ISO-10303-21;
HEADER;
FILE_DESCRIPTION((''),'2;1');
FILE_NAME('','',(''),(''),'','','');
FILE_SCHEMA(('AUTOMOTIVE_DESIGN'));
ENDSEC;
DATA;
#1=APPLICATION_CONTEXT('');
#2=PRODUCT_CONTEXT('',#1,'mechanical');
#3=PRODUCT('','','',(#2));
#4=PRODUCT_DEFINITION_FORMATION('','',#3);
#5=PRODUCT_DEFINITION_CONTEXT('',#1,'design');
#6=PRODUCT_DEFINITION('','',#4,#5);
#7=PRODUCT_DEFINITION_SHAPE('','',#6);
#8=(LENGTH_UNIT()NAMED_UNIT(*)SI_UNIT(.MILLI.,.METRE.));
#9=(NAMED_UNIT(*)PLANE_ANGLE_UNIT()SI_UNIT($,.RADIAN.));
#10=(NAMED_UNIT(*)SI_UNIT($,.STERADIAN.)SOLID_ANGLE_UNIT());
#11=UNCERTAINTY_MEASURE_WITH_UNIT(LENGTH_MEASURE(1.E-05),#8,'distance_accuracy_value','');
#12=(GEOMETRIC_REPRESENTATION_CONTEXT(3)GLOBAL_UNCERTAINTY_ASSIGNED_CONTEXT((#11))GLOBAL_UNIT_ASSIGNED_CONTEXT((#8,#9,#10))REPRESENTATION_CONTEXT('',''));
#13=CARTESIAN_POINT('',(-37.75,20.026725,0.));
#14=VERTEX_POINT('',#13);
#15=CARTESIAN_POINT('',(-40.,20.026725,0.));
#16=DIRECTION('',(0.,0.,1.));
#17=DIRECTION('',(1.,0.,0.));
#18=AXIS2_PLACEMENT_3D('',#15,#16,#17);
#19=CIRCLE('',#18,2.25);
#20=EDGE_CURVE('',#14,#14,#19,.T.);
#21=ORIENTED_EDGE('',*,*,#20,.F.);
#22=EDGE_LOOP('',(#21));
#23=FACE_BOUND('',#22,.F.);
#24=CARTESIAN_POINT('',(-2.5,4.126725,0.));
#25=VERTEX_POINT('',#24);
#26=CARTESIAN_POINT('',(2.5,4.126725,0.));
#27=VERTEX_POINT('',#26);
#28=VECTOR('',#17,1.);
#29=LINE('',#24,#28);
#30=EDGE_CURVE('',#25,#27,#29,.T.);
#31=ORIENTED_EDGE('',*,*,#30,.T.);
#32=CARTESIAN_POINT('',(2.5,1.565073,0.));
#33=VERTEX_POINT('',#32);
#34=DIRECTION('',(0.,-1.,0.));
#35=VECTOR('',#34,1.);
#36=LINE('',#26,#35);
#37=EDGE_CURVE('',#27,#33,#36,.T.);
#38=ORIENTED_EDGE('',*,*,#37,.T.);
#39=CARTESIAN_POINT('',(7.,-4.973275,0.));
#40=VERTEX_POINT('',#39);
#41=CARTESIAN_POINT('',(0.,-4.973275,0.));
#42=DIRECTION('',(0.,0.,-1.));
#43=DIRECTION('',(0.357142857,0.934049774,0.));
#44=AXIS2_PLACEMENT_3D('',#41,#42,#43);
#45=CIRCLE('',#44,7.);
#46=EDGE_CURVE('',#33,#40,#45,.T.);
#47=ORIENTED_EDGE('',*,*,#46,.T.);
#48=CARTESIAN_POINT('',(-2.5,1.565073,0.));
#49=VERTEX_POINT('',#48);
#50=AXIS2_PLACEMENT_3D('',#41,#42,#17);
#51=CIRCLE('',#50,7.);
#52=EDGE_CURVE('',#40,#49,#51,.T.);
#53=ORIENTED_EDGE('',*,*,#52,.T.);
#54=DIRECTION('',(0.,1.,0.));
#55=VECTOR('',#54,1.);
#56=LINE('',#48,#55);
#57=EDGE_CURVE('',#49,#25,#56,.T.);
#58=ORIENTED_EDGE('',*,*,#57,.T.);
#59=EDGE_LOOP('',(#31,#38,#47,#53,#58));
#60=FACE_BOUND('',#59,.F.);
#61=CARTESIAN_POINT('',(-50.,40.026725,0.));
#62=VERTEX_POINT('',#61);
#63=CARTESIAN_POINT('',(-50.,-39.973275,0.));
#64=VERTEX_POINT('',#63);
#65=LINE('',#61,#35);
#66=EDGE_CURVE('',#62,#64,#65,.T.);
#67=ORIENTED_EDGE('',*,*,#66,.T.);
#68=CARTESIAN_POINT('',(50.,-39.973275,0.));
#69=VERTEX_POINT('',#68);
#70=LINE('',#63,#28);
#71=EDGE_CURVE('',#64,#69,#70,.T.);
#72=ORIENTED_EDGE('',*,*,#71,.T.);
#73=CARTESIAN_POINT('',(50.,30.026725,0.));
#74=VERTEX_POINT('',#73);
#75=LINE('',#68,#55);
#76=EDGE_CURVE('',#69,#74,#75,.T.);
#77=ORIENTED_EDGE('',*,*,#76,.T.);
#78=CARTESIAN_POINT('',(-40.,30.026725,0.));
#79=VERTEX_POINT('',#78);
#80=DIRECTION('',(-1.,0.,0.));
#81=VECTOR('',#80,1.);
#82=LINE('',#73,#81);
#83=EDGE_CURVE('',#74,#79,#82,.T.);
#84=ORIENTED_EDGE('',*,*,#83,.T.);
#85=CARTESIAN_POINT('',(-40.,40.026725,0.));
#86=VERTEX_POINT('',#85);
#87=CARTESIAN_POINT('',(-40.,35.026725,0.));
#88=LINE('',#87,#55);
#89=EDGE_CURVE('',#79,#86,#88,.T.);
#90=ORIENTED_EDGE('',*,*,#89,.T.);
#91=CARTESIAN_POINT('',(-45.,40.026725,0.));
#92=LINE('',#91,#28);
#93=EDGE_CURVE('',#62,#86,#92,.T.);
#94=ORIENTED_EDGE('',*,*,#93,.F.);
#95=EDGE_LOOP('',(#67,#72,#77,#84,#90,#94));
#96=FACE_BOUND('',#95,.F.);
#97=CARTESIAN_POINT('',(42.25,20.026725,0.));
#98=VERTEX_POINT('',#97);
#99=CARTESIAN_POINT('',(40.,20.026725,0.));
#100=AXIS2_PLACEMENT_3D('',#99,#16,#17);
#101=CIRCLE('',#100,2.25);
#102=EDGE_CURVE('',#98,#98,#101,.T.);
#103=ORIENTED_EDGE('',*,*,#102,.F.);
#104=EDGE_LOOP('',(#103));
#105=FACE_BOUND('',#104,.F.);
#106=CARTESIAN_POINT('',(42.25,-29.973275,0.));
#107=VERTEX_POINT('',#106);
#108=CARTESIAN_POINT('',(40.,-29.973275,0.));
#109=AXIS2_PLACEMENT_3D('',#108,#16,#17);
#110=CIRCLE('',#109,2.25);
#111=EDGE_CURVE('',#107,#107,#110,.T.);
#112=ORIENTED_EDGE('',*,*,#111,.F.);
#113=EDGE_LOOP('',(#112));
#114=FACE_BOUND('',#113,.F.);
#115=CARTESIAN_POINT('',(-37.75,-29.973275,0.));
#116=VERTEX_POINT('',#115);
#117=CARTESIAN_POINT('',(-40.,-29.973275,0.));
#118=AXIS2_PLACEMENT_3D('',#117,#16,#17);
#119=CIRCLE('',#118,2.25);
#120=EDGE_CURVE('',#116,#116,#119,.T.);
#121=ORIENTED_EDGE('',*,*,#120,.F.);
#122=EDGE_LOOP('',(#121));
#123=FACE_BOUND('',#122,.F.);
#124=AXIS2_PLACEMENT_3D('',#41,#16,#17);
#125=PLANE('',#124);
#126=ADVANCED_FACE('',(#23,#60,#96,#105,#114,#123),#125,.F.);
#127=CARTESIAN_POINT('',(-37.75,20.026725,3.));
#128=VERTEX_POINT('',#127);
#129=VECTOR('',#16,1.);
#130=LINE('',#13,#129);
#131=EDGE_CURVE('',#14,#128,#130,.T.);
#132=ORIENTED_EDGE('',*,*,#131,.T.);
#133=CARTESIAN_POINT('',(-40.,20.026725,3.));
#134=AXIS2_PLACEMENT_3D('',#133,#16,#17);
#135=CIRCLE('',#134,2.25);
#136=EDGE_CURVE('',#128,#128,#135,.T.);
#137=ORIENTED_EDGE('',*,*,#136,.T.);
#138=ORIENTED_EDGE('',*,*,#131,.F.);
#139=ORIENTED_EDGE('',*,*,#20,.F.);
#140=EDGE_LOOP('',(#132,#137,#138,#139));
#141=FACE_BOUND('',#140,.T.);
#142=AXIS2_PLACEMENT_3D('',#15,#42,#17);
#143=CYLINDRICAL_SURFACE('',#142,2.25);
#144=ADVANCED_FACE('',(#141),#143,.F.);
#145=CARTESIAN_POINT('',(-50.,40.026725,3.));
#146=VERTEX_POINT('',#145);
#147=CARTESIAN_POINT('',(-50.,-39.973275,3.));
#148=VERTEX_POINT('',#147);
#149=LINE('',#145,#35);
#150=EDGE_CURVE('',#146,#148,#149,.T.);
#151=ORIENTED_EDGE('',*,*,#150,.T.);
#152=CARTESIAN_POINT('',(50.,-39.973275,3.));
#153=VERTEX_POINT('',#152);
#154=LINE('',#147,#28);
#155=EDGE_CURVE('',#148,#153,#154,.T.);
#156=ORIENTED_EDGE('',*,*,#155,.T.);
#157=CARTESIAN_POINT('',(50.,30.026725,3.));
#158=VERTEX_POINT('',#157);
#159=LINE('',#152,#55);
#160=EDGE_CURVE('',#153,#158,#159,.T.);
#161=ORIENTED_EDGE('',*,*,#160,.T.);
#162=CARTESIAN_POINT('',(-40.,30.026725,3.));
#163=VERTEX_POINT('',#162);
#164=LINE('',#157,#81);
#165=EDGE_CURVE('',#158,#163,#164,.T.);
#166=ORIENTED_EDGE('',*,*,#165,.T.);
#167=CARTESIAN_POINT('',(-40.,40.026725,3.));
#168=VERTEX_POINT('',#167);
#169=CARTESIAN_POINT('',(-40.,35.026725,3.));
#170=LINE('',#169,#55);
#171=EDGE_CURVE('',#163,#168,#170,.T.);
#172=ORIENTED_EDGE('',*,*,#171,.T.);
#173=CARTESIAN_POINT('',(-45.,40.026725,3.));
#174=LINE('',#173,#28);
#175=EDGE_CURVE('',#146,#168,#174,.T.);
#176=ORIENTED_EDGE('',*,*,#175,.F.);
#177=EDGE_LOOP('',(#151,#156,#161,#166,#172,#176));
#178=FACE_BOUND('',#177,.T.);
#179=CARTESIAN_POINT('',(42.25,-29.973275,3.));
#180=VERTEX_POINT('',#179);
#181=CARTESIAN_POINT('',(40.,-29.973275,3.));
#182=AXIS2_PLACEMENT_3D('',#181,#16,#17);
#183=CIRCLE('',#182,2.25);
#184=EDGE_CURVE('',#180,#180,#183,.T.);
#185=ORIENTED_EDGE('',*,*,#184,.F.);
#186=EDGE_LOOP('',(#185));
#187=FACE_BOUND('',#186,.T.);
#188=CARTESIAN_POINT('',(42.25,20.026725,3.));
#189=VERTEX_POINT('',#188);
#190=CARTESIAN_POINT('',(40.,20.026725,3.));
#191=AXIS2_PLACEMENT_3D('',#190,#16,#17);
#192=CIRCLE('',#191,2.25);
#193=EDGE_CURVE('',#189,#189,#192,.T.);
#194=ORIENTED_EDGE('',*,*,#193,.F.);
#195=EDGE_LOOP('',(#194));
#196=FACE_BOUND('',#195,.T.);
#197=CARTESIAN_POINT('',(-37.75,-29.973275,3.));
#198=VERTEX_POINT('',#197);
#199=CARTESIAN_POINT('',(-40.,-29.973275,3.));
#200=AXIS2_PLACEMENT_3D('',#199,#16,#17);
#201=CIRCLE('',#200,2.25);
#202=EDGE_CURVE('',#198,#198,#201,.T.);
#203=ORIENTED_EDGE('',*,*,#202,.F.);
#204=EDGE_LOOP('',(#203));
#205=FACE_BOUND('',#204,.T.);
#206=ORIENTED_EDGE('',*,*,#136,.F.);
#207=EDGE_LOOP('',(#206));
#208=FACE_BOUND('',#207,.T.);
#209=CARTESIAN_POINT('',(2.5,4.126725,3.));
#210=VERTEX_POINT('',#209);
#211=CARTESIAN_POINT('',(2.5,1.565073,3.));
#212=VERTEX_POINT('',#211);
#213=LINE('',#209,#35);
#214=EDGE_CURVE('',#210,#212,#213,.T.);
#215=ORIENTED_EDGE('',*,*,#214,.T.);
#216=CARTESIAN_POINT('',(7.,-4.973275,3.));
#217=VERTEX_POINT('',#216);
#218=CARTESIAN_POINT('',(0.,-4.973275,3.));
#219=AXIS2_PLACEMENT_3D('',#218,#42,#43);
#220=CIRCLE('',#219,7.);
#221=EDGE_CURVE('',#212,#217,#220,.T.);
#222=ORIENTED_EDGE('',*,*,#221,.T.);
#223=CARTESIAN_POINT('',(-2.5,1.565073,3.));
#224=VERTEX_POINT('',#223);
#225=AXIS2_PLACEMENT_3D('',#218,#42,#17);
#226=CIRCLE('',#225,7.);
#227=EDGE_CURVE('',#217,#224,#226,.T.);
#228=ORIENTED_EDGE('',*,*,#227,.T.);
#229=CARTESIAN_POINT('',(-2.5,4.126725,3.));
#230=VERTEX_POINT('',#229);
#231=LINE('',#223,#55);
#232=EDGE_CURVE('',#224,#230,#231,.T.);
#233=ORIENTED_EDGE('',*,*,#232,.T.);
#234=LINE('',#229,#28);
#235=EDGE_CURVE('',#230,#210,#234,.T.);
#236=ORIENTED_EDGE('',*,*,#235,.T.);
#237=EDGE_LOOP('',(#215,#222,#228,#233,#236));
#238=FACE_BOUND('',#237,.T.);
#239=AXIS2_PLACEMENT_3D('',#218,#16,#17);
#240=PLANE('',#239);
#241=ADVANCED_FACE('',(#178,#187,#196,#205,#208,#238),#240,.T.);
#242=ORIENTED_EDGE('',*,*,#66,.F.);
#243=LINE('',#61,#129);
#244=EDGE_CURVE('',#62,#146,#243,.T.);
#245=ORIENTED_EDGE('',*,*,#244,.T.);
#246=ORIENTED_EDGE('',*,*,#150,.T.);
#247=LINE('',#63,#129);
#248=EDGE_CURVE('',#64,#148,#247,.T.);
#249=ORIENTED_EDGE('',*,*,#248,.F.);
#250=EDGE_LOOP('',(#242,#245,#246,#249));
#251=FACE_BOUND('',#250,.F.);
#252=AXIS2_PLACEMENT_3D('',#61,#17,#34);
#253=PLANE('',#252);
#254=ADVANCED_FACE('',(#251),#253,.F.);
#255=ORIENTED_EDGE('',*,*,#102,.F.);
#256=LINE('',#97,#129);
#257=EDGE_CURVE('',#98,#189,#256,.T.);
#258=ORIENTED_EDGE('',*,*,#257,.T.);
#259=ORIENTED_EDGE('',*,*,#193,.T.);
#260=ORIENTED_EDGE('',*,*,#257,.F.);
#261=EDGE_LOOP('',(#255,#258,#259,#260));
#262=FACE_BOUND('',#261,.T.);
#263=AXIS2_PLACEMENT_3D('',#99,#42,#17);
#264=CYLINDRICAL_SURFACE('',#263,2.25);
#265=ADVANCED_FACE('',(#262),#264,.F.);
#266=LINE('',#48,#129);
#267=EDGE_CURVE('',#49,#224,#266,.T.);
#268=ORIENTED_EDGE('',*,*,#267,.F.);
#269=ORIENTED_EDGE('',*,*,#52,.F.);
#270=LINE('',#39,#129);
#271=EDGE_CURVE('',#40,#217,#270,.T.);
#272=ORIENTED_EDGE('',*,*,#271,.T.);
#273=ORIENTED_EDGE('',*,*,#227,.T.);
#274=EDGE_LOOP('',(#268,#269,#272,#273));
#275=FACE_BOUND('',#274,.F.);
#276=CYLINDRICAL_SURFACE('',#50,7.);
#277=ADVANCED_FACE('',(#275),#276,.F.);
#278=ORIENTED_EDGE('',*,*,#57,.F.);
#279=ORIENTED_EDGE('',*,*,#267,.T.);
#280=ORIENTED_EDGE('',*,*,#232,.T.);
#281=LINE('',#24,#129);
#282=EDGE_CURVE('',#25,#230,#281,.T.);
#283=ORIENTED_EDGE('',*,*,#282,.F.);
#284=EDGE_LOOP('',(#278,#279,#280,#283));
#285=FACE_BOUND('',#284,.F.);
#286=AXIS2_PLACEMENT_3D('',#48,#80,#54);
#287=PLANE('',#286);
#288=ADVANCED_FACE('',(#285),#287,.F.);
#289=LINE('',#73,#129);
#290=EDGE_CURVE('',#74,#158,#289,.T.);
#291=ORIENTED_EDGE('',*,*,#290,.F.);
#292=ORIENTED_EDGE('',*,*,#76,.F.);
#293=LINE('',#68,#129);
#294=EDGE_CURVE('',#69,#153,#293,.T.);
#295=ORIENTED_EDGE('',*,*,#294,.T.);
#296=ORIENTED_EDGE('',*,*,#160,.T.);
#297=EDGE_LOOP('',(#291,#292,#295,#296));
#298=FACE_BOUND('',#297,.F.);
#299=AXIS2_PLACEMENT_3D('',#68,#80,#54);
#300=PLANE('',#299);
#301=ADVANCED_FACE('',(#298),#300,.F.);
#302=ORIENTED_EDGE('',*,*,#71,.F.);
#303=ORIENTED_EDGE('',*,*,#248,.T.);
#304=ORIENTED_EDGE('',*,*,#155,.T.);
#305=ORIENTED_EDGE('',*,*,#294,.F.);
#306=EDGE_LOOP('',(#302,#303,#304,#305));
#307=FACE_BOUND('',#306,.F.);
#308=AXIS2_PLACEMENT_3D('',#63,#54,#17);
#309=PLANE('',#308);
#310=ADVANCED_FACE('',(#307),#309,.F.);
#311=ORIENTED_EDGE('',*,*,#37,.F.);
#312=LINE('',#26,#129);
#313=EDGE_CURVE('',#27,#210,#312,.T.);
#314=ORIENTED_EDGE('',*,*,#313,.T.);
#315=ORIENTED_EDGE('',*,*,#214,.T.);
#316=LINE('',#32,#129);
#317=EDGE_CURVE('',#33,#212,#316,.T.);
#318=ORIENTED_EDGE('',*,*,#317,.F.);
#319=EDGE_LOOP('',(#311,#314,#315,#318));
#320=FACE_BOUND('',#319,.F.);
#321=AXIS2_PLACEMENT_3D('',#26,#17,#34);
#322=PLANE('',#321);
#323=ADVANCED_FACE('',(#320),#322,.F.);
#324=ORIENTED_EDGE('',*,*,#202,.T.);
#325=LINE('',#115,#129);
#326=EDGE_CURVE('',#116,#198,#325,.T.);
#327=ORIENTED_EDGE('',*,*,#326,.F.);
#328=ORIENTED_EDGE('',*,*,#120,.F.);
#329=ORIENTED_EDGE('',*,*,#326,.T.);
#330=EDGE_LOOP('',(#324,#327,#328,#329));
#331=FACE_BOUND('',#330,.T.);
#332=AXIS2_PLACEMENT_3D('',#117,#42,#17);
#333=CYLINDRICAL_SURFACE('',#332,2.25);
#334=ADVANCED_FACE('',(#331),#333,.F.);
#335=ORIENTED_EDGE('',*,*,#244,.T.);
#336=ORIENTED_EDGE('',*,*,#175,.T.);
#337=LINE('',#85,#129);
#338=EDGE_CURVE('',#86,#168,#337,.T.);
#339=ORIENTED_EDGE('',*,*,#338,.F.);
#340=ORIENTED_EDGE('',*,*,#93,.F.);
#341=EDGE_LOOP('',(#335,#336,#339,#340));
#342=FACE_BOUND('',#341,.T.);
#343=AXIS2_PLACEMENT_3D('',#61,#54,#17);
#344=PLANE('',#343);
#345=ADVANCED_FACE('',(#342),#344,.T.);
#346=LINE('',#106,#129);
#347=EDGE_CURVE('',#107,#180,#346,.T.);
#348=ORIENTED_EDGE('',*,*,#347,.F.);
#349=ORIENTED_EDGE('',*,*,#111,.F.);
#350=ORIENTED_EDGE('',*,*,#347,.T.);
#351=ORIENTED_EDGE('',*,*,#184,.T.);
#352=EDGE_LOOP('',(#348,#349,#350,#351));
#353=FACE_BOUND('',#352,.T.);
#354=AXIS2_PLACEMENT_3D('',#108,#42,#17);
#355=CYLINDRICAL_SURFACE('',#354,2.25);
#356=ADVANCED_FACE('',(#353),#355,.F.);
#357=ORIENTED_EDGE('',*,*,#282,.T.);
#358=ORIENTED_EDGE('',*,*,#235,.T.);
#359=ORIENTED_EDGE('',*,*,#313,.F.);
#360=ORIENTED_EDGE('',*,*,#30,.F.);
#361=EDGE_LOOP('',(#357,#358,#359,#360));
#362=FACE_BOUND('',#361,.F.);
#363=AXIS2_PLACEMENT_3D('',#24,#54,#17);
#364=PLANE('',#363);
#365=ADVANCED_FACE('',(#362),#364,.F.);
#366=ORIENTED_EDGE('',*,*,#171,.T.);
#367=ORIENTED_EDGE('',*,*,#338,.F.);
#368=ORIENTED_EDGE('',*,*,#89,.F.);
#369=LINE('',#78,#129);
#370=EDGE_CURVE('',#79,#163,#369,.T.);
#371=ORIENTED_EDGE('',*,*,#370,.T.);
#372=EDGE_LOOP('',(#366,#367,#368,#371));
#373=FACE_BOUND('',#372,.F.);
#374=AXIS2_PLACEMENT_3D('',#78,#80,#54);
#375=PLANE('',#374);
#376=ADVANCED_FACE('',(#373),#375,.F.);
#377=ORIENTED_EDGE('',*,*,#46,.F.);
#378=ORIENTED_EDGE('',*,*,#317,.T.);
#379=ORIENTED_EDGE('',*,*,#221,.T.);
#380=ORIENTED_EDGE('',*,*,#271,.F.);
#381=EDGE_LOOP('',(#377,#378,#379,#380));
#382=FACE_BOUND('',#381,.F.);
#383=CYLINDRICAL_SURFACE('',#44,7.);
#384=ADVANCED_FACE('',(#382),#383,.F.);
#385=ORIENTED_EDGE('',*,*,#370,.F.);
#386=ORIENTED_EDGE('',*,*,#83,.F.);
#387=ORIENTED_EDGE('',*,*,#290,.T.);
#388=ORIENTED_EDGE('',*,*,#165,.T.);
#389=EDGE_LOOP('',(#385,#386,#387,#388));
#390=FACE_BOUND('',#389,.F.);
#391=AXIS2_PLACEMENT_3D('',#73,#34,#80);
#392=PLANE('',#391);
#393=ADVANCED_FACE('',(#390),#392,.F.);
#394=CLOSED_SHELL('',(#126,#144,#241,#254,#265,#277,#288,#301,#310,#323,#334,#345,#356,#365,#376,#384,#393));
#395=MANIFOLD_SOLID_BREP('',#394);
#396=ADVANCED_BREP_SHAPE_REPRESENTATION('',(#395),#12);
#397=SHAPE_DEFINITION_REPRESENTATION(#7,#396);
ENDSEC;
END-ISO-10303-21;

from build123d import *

# Parameters (mm, degrees)
F0_R     = 2.25
F0_W     = 10
F0_H     = 10
F1_DEPTH = 3


# Not quite as in the source:
# - a feature names something its author has since deleted; it is built from what else it names


with BuildPart() as f1:
    # F0 (on Top) → F1 (new body)
    with BuildSketch(Plane.XY):
        Polygon((-50, -39.9732751399), (50, -39.9732751399), (50, 30.0267248601), (-40, 30.0267248601), (-50, 30.0267248601), align=None)
        with Locations((-40, -29.9732751399)):
            Circle(F0_R, mode=Mode.SUBTRACT)
        with Locations((40, -29.9732751399)):
            Circle(F0_R, mode=Mode.SUBTRACT)
        with BuildLine():
            Line((2.5, 4.1267248601), (2.5, 1.5650732754))
            ThreePointArc((2.5, 1.5650732754), (5.7662812973, -1.0046481733), (7, -4.9732751399))
            ThreePointArc((7, -4.9732751399), (-3.9686269666, -10.7395564373), (-2.5, 1.5650732754))
            Line((-2.5, 1.5650732754), (-2.5, 4.1267248601))
            Line((-2.5, 4.1267248601), (2.5, 4.1267248601))
        make_face(mode=Mode.SUBTRACT)
        with Locations((-40, 20.0267248601)):
            Circle(F0_R, mode=Mode.SUBTRACT)
        with Locations((40, 20.0267248601)):
            Circle(F0_R, mode=Mode.SUBTRACT)
        with Locations((-45, 35.0267248601)):
            Rectangle(F0_W, F0_H)
    extrude(amount=F1_DEPTH)


solid = f1.part
